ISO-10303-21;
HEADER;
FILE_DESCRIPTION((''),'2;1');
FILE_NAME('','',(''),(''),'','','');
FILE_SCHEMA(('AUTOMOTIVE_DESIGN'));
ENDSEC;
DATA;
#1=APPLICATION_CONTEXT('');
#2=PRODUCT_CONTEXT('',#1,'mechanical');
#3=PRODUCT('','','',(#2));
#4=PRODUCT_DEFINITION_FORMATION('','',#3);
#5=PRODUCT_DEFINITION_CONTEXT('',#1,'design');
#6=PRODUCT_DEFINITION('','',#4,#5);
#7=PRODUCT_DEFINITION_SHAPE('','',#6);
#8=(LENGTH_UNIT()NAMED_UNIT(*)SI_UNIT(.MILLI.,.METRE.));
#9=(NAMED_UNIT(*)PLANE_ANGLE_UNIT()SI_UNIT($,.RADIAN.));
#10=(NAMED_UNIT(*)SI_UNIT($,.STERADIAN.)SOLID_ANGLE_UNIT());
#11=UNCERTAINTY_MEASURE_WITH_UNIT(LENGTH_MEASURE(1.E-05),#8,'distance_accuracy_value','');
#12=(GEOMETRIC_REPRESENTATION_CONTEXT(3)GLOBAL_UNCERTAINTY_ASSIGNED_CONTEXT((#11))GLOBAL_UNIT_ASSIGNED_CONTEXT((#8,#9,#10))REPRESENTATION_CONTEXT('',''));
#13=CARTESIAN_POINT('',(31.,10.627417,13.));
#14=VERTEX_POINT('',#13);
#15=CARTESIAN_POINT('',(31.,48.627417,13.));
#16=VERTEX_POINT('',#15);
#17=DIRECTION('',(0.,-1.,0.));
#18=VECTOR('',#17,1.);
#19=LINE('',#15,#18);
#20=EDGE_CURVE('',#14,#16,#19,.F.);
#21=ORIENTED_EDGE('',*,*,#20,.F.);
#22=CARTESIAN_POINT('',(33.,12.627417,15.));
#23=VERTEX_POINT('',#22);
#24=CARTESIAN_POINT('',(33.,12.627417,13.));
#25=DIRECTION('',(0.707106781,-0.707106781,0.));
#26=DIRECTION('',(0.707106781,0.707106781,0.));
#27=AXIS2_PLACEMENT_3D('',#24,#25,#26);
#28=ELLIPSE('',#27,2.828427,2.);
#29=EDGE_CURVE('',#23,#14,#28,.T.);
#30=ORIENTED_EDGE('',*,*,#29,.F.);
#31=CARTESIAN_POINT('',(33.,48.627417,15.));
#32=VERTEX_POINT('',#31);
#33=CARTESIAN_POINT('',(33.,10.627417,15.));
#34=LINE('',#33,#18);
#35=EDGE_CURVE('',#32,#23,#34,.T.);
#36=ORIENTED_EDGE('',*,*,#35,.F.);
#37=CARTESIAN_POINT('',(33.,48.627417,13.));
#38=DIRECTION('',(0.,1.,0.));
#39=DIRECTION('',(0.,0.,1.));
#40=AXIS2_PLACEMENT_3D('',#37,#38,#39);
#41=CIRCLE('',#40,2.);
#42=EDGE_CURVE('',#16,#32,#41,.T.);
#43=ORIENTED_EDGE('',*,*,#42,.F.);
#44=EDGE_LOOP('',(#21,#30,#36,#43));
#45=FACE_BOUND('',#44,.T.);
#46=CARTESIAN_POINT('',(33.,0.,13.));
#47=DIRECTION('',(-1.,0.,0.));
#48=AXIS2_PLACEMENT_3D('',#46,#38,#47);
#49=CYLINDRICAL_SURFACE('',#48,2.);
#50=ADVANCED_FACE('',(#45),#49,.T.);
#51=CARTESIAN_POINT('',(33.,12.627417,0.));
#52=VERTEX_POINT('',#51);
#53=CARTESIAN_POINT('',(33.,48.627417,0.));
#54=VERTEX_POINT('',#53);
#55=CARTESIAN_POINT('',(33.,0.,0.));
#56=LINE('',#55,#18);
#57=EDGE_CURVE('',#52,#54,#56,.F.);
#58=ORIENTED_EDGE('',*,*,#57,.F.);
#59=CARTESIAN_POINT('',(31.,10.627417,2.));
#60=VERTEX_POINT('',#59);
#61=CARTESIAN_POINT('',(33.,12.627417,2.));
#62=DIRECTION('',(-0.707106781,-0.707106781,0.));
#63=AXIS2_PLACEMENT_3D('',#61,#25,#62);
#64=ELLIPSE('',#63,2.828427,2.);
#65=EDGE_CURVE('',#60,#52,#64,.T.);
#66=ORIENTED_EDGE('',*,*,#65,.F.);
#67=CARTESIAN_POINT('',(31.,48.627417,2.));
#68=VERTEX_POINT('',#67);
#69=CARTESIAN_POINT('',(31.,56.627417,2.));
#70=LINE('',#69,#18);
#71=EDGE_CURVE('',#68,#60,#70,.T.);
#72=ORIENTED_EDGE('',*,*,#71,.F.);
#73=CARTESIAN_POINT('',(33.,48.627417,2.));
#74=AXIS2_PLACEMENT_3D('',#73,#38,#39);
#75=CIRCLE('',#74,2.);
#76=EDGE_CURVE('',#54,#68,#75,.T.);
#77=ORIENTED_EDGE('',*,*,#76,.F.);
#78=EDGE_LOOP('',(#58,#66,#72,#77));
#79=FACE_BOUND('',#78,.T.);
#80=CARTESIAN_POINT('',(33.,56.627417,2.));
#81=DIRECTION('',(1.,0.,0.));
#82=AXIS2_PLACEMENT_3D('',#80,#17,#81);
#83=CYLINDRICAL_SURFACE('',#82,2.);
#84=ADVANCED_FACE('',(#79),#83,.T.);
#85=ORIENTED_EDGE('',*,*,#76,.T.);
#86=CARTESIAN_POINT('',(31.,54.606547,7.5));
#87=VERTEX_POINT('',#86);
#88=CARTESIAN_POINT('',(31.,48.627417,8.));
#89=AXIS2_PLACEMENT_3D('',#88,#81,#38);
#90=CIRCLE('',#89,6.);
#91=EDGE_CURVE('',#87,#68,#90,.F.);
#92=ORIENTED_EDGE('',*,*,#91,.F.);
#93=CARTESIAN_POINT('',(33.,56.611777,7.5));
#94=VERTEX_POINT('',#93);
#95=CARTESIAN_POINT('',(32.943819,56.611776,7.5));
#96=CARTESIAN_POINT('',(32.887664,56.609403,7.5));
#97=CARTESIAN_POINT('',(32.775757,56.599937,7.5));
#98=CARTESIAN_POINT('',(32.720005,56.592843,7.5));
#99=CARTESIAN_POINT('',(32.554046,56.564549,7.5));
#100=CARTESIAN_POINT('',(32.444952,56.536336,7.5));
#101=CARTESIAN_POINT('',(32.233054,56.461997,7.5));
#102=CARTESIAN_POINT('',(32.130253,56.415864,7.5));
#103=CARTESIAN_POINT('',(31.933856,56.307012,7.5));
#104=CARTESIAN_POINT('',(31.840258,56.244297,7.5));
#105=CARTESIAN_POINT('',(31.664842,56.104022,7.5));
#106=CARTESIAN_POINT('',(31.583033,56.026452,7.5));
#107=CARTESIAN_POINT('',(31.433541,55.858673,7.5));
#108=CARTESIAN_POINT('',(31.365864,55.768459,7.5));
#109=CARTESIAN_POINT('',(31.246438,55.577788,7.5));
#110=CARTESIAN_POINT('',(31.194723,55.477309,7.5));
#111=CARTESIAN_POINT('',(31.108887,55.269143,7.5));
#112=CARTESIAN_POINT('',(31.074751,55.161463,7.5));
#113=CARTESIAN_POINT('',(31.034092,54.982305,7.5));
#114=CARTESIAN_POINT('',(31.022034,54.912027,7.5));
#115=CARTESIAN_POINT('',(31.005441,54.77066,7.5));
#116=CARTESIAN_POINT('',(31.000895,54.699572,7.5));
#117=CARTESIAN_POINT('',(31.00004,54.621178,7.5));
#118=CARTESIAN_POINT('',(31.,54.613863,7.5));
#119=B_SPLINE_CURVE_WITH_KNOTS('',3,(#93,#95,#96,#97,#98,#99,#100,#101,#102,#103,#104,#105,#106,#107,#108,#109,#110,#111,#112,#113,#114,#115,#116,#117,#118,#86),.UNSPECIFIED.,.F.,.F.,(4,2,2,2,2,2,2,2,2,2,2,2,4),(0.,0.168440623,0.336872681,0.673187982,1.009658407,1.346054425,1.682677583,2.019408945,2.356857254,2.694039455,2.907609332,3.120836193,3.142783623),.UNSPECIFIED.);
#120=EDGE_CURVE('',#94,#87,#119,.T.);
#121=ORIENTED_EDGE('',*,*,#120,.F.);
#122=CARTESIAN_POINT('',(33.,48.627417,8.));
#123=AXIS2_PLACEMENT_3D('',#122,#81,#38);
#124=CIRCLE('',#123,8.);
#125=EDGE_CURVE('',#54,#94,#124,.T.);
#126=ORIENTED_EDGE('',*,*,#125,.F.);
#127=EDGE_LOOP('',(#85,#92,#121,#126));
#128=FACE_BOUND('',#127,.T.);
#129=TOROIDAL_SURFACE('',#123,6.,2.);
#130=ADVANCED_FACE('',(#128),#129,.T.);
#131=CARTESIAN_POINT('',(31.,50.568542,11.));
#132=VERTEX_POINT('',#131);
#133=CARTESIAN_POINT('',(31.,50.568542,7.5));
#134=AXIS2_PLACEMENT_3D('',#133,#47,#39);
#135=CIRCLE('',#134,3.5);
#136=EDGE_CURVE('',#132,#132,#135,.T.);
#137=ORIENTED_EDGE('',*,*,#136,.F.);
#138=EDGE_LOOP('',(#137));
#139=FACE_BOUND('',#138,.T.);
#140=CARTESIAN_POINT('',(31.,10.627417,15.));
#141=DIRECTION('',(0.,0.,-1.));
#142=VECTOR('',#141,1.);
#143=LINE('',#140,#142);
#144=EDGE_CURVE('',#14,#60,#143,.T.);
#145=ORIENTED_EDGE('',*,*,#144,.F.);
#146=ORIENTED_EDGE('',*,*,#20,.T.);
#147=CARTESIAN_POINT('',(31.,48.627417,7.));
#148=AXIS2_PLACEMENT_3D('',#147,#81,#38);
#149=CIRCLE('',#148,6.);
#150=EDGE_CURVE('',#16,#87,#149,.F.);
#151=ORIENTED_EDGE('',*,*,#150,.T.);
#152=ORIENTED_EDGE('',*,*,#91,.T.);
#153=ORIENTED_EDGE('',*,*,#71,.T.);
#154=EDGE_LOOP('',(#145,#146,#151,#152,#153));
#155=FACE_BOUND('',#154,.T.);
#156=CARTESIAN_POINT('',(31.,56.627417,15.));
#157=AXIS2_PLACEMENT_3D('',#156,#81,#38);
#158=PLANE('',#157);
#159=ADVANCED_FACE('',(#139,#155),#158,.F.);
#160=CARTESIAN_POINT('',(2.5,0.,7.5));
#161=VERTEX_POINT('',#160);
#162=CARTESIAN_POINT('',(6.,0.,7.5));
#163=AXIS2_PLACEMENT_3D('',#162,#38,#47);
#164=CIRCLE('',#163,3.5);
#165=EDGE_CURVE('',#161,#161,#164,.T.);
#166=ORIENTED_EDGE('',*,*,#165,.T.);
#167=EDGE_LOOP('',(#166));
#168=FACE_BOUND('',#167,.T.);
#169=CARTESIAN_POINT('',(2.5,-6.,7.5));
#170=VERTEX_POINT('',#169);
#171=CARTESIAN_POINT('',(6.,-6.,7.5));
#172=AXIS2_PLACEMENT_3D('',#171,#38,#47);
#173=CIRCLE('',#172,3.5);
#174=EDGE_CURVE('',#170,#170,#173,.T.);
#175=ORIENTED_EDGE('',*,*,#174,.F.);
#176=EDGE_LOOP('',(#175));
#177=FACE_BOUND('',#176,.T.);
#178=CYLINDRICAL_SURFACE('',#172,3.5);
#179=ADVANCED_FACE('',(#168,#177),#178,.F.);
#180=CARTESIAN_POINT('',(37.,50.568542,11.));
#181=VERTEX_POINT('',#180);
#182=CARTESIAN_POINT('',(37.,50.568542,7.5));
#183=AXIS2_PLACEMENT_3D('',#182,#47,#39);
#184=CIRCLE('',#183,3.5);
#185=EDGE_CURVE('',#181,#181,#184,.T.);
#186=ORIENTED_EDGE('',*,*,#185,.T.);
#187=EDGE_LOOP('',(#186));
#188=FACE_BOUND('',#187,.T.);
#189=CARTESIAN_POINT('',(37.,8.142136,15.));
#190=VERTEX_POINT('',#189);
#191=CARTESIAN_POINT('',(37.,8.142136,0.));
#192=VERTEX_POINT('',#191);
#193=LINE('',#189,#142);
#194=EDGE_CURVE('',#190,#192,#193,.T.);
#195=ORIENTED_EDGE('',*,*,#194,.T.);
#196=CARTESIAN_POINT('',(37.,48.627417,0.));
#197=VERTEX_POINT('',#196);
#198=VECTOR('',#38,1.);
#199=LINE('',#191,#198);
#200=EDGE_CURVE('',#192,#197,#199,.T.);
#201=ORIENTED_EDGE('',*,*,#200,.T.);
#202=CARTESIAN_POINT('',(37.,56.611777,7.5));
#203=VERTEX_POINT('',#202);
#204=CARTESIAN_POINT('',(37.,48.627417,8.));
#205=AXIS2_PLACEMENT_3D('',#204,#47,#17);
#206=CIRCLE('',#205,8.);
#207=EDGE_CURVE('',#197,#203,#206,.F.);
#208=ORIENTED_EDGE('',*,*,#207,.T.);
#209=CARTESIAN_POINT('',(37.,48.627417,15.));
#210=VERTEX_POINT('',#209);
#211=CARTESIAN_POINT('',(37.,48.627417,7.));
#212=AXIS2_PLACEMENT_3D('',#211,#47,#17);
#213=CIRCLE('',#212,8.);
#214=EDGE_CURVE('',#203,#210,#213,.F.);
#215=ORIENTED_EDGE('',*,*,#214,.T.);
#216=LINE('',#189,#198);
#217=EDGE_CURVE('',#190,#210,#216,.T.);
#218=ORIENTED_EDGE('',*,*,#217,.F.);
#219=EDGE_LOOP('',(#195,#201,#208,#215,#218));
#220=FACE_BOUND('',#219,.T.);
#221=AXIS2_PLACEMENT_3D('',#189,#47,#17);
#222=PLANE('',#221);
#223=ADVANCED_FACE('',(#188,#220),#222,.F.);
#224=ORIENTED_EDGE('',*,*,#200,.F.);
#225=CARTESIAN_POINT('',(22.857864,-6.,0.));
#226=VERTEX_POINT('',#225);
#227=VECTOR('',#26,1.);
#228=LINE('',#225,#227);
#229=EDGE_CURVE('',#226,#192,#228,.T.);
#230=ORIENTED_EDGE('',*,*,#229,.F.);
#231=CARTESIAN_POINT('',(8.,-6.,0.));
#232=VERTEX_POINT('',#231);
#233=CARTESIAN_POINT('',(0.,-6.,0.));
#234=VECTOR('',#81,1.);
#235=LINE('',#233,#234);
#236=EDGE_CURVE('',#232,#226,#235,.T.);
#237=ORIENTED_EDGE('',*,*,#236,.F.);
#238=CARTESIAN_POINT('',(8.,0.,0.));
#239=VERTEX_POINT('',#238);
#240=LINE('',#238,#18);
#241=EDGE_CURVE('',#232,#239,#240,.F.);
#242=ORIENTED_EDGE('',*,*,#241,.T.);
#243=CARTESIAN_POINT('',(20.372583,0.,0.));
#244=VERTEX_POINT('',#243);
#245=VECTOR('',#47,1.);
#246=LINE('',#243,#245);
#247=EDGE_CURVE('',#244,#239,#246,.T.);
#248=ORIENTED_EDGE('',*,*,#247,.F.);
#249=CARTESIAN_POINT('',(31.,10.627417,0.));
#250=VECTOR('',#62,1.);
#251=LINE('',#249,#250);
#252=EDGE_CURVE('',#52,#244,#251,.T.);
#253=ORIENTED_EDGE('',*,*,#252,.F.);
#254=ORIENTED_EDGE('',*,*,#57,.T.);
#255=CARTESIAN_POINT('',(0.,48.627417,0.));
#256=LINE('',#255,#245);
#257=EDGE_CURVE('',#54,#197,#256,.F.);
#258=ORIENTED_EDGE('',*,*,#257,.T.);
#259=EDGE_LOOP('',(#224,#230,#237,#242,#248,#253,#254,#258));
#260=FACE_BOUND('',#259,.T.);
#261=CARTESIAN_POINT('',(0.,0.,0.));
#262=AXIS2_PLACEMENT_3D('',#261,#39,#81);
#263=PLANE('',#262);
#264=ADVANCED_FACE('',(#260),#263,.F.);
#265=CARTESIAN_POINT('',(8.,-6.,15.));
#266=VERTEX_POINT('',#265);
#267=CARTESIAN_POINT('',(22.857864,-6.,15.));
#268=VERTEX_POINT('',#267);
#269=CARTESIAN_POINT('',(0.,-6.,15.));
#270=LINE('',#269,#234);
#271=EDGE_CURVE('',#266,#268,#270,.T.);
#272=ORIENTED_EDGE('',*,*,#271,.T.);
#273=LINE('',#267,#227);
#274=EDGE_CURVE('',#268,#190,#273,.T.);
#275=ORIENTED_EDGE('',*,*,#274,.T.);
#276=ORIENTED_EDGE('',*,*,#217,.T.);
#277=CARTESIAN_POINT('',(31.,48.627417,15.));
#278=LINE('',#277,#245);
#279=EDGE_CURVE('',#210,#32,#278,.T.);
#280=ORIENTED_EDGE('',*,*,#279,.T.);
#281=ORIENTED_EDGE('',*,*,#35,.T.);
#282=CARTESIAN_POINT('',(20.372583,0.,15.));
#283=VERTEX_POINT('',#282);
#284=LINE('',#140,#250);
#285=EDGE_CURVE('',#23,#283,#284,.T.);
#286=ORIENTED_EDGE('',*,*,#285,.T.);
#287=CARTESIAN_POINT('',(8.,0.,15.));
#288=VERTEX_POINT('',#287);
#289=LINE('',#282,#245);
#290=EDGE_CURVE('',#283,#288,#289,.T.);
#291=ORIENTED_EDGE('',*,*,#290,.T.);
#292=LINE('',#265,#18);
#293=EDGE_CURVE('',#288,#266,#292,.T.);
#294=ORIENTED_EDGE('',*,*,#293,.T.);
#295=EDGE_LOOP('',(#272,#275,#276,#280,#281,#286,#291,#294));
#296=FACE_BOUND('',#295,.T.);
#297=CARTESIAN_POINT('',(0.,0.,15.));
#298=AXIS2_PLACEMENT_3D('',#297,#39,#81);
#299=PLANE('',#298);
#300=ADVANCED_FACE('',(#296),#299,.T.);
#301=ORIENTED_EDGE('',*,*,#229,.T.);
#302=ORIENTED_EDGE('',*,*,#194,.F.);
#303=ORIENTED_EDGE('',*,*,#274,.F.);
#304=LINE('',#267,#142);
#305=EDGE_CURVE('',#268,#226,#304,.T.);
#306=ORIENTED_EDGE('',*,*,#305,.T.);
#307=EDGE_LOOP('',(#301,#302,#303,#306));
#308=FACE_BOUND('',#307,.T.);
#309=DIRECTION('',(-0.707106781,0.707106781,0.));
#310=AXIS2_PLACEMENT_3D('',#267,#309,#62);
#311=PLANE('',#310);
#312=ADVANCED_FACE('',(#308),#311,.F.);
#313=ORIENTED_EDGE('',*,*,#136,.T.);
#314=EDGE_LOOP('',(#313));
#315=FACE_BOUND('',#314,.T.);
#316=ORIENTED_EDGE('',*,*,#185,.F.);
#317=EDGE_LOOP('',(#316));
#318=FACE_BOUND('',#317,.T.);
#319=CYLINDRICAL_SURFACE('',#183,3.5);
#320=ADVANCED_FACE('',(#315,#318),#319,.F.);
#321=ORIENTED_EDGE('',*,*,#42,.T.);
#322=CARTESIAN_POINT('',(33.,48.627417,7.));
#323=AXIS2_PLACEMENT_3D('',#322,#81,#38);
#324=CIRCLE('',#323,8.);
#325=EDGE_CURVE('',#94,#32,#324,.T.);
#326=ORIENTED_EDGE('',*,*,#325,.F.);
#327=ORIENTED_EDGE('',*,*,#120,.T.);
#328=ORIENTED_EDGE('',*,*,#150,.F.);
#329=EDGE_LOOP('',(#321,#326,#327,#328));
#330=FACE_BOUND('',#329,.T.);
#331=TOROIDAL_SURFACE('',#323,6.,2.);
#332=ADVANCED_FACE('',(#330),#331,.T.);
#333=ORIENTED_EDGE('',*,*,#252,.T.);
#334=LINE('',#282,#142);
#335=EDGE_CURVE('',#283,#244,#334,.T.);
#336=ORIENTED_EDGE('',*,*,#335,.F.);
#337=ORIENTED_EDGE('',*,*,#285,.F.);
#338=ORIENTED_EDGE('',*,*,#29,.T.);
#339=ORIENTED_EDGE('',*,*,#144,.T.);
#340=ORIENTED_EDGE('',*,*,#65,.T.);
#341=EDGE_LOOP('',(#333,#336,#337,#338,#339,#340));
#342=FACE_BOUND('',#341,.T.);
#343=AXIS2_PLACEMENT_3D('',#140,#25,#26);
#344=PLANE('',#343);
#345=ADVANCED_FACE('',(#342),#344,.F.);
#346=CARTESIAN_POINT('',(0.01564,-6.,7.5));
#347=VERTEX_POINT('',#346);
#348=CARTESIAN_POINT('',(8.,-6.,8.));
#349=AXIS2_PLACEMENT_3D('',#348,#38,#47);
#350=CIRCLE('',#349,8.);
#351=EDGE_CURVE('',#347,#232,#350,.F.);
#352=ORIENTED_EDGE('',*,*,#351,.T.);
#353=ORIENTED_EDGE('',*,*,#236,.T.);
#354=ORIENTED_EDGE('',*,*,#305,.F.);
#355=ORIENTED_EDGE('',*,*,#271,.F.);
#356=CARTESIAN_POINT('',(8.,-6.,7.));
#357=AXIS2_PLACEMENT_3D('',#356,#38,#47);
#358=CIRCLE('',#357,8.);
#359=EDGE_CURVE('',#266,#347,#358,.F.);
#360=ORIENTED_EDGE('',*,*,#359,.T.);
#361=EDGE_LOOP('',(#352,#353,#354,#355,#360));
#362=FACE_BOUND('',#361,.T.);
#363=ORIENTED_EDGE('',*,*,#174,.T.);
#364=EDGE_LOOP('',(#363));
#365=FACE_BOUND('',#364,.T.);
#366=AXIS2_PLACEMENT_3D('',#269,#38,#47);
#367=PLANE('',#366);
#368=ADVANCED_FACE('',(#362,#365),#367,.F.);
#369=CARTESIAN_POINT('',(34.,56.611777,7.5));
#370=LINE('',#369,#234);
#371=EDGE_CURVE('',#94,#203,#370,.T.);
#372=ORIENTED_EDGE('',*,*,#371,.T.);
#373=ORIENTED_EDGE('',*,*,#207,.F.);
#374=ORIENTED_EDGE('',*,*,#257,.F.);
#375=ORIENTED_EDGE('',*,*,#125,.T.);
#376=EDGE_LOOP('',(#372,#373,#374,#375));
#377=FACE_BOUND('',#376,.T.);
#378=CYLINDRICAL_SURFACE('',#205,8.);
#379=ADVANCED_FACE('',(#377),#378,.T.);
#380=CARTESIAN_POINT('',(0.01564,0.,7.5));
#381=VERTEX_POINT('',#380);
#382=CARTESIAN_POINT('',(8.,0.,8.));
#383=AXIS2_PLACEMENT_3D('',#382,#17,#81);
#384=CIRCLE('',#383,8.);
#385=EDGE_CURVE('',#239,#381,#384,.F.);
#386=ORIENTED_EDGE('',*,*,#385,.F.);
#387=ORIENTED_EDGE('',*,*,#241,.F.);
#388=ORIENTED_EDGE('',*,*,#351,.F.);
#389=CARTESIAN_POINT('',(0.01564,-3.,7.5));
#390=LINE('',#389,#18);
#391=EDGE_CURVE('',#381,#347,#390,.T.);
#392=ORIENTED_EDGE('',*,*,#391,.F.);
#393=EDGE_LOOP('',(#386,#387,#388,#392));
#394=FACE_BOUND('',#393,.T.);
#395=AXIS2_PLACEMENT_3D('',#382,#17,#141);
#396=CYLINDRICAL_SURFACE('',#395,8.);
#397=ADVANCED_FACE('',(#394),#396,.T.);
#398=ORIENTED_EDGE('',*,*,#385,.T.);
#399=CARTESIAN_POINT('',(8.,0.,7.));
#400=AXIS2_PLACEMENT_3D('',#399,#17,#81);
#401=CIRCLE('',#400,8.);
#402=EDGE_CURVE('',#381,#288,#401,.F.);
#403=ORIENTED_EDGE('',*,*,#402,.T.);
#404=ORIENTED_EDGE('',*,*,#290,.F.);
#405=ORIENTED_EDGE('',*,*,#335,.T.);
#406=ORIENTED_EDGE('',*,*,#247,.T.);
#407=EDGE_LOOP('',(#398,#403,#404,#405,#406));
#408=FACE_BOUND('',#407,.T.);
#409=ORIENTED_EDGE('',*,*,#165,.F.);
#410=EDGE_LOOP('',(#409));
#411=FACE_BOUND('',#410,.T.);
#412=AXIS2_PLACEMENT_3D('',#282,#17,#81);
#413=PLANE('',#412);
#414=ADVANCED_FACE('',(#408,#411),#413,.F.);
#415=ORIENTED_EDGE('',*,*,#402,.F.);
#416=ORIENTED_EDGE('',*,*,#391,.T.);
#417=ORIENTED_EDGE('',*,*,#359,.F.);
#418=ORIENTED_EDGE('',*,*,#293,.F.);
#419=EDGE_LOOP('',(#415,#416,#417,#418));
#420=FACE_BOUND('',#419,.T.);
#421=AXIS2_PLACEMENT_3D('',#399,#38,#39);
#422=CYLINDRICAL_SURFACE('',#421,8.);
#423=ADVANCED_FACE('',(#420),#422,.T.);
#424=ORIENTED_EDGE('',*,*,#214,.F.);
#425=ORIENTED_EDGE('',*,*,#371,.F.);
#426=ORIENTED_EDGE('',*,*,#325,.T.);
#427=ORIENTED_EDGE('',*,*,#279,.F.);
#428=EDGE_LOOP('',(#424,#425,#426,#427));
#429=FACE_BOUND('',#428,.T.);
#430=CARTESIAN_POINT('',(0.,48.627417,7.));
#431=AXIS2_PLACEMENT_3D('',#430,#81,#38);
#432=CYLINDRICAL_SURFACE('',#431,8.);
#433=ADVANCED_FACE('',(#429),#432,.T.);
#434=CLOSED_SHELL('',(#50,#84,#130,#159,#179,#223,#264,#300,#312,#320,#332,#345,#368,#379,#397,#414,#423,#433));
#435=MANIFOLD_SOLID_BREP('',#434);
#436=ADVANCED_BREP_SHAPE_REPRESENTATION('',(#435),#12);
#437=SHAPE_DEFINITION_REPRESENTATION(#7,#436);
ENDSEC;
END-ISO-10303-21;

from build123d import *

# Parameters (mm, degrees)
EXTRUDE_1_DEPTH     = 15
SKETCH_3_R          = 3.5
CUT_EXTRUDE_1_DEPTH = 70.286826712
SKETCH_4_R          = 3.5
CUT_EXTRUDE_2_DEPTH = 67.277178243
FILLET_1_R          = 8
FILLET_4_R          = 2


with BuildPart() as part:
    # 草图1 → 凸台-拉伸1 (new body)
    with BuildSketch(Plane.XY):
        Polygon((0, 0), (0, -6), (22.857864376, -6), (37, 8.142135624), (37, 56.627416998), (31, 56.627416998), (31, 10.627416998), (20.372583002, 0), align=None)
    extrude(amount=EXTRUDE_1_DEPTH)

    # 草图3 → 切除-拉伸1 (cut, through all)
    with BuildSketch(Plane(origin=(0, 0, 0), x_dir=(1, 0, 0), z_dir=(0, 1, 0))):
        with Locations(Location((6, -7.5, 0), (0, 0, 180))):
            Circle(SKETCH_3_R)
    extrude(amount=-CUT_EXTRUDE_1_DEPTH, mode=Mode.SUBTRACT)

    # 草图4 → 切除-拉伸2 (cut, through all)
    with BuildSketch(Plane.ZY.offset(-31)):
        with Locations((7.5, 50.568542495)):
            Circle(SKETCH_4_R)
    extrude(amount=-CUT_EXTRUDE_2_DEPTH, mode=Mode.SUBTRACT)

    # 圆角1
    # the kernel refuses this fillet: 8 mm, written as the material it takes off along each edge
    with BuildSketch(Plane(origin=(0, 20, 15), x_dir=(0, 0, -1), z_dir=(0, -1, 0)), Plane(origin=(57, 56.627416998, 0), x_dir=(0, -1, 0), z_dir=(-1, 0, 0))) as fillet_1_piece_1:
        with BuildLine():
            CenterArc((FILLET_1_R, FILLET_1_R), FILLET_1_R, 180, 90)
            Line((0, FILLET_1_R), (0, 0))
            Line((0, 0), (FILLET_1_R, 0))
        make_face()
    extrude(amount=46, mode=Mode.SUBTRACT)
    with BuildSketch(Plane(origin=(0, 20, 0), x_dir=(0, 0, 1), z_dir=(0, -1, 0)), Plane(origin=(57, 56.627416998, 15), x_dir=(0, -1, 0), z_dir=(-1, 0, 0))) as fillet_1_piece_2:
        with BuildLine():
            CenterArc((FILLET_1_R, -FILLET_1_R), FILLET_1_R, 90, 90)
            Line((0, -FILLET_1_R), (0, 0))
            Line((0, 0), (FILLET_1_R, 0))
        make_face()
    extrude(amount=46, mode=Mode.SUBTRACT)

    # 圆角4
    # the kernel refuses this fillet: 2 mm, written as the material it takes off along each edge
    with BuildSketch(Plane(origin=(31, 48.627416998, 15), x_dir=(0, 0, -1), z_dir=(0, -1, 0))) as fillet_4_piece_1_section:
        with BuildLine():
            CenterArc((FILLET_4_R, FILLET_4_R), FILLET_4_R, 180, 90)
            Line((0, FILLET_4_R), (0, 0))
            Line((0, 0), (FILLET_4_R, 0))
        make_face()
    fillet_4_piece_1 = extrude(amount=43, mode=Mode.PRIVATE)
    fillet_4_piece_1 = split(fillet_4_piece_1, bisect_by=Plane(origin=(40.835879215, 20.463296213, 14.544284738), z_dir=(-0.7071067811865489, 0.7071067811865461, 0)), keep=Keep.TOP, mode=Mode.PRIVATE)
    add(fillet_4_piece_1, mode=Mode.SUBTRACT)
    with BuildSketch(Plane(origin=(31, 48.627416998, 0), x_dir=(1, 0, 0), z_dir=(0, -1, 0))) as fillet_4_piece_2_section:
        with BuildLine():
            CenterArc((FILLET_4_R, FILLET_4_R), FILLET_4_R, 180, 90)
            Line((0, FILLET_4_R), (0, 0))
            Line((0, 0), (FILLET_4_R, 0))
        make_face()
    fillet_4_piece_2 = extrude(amount=43, mode=Mode.PRIVATE)
    fillet_4_piece_2 = split(fillet_4_piece_2, bisect_by=Plane(origin=(40.835879215, 20.463296213, 0.455715262), z_dir=(-0.7071067811865489, 0.7071067811865461, 0)), keep=Keep.TOP, mode=Mode.PRIVATE)
    add(fillet_4_piece_2, mode=Mode.SUBTRACT)
    with BuildSketch(Plane(origin=(31, 48.627416998, 7), x_dir=(0, 0.8458227796369704, -0.5334639870199197), z_dir=(0, -0.5334639870199197, -0.8458227796369704))) as fillet_4_piece_3:
        with BuildLine():
            CenterArc((8 - FILLET_4_R, FILLET_4_R), FILLET_4_R, 270, 90)
            Line((8, FILLET_4_R), (8, 0))
            Line((8, 0), (8 - FILLET_4_R, 0))
        make_face()
    revolve(axis=Axis((31, 48.627416998, 7), (1, 0, 0)), revolution_arc=122.239802646, mode=Mode.SUBTRACT)
    with BuildSketch(Plane(origin=(31, 48.627416998, 8), x_dir=(0, 0, -1), z_dir=(0, -1, 0))) as fillet_4_piece_4:
        with BuildLine():
            CenterArc((8 - FILLET_4_R, FILLET_4_R), FILLET_4_R, 270, 90)
            Line((8, FILLET_4_R), (8, 0))
            Line((8, 0), (8 - FILLET_4_R, 0))
        make_face()
    revolve(axis=Axis((31, 48.627416998, 8), (1, 0, 0)), revolution_arc=122.239802646, mode=Mode.SUBTRACT)


solid = part.part
